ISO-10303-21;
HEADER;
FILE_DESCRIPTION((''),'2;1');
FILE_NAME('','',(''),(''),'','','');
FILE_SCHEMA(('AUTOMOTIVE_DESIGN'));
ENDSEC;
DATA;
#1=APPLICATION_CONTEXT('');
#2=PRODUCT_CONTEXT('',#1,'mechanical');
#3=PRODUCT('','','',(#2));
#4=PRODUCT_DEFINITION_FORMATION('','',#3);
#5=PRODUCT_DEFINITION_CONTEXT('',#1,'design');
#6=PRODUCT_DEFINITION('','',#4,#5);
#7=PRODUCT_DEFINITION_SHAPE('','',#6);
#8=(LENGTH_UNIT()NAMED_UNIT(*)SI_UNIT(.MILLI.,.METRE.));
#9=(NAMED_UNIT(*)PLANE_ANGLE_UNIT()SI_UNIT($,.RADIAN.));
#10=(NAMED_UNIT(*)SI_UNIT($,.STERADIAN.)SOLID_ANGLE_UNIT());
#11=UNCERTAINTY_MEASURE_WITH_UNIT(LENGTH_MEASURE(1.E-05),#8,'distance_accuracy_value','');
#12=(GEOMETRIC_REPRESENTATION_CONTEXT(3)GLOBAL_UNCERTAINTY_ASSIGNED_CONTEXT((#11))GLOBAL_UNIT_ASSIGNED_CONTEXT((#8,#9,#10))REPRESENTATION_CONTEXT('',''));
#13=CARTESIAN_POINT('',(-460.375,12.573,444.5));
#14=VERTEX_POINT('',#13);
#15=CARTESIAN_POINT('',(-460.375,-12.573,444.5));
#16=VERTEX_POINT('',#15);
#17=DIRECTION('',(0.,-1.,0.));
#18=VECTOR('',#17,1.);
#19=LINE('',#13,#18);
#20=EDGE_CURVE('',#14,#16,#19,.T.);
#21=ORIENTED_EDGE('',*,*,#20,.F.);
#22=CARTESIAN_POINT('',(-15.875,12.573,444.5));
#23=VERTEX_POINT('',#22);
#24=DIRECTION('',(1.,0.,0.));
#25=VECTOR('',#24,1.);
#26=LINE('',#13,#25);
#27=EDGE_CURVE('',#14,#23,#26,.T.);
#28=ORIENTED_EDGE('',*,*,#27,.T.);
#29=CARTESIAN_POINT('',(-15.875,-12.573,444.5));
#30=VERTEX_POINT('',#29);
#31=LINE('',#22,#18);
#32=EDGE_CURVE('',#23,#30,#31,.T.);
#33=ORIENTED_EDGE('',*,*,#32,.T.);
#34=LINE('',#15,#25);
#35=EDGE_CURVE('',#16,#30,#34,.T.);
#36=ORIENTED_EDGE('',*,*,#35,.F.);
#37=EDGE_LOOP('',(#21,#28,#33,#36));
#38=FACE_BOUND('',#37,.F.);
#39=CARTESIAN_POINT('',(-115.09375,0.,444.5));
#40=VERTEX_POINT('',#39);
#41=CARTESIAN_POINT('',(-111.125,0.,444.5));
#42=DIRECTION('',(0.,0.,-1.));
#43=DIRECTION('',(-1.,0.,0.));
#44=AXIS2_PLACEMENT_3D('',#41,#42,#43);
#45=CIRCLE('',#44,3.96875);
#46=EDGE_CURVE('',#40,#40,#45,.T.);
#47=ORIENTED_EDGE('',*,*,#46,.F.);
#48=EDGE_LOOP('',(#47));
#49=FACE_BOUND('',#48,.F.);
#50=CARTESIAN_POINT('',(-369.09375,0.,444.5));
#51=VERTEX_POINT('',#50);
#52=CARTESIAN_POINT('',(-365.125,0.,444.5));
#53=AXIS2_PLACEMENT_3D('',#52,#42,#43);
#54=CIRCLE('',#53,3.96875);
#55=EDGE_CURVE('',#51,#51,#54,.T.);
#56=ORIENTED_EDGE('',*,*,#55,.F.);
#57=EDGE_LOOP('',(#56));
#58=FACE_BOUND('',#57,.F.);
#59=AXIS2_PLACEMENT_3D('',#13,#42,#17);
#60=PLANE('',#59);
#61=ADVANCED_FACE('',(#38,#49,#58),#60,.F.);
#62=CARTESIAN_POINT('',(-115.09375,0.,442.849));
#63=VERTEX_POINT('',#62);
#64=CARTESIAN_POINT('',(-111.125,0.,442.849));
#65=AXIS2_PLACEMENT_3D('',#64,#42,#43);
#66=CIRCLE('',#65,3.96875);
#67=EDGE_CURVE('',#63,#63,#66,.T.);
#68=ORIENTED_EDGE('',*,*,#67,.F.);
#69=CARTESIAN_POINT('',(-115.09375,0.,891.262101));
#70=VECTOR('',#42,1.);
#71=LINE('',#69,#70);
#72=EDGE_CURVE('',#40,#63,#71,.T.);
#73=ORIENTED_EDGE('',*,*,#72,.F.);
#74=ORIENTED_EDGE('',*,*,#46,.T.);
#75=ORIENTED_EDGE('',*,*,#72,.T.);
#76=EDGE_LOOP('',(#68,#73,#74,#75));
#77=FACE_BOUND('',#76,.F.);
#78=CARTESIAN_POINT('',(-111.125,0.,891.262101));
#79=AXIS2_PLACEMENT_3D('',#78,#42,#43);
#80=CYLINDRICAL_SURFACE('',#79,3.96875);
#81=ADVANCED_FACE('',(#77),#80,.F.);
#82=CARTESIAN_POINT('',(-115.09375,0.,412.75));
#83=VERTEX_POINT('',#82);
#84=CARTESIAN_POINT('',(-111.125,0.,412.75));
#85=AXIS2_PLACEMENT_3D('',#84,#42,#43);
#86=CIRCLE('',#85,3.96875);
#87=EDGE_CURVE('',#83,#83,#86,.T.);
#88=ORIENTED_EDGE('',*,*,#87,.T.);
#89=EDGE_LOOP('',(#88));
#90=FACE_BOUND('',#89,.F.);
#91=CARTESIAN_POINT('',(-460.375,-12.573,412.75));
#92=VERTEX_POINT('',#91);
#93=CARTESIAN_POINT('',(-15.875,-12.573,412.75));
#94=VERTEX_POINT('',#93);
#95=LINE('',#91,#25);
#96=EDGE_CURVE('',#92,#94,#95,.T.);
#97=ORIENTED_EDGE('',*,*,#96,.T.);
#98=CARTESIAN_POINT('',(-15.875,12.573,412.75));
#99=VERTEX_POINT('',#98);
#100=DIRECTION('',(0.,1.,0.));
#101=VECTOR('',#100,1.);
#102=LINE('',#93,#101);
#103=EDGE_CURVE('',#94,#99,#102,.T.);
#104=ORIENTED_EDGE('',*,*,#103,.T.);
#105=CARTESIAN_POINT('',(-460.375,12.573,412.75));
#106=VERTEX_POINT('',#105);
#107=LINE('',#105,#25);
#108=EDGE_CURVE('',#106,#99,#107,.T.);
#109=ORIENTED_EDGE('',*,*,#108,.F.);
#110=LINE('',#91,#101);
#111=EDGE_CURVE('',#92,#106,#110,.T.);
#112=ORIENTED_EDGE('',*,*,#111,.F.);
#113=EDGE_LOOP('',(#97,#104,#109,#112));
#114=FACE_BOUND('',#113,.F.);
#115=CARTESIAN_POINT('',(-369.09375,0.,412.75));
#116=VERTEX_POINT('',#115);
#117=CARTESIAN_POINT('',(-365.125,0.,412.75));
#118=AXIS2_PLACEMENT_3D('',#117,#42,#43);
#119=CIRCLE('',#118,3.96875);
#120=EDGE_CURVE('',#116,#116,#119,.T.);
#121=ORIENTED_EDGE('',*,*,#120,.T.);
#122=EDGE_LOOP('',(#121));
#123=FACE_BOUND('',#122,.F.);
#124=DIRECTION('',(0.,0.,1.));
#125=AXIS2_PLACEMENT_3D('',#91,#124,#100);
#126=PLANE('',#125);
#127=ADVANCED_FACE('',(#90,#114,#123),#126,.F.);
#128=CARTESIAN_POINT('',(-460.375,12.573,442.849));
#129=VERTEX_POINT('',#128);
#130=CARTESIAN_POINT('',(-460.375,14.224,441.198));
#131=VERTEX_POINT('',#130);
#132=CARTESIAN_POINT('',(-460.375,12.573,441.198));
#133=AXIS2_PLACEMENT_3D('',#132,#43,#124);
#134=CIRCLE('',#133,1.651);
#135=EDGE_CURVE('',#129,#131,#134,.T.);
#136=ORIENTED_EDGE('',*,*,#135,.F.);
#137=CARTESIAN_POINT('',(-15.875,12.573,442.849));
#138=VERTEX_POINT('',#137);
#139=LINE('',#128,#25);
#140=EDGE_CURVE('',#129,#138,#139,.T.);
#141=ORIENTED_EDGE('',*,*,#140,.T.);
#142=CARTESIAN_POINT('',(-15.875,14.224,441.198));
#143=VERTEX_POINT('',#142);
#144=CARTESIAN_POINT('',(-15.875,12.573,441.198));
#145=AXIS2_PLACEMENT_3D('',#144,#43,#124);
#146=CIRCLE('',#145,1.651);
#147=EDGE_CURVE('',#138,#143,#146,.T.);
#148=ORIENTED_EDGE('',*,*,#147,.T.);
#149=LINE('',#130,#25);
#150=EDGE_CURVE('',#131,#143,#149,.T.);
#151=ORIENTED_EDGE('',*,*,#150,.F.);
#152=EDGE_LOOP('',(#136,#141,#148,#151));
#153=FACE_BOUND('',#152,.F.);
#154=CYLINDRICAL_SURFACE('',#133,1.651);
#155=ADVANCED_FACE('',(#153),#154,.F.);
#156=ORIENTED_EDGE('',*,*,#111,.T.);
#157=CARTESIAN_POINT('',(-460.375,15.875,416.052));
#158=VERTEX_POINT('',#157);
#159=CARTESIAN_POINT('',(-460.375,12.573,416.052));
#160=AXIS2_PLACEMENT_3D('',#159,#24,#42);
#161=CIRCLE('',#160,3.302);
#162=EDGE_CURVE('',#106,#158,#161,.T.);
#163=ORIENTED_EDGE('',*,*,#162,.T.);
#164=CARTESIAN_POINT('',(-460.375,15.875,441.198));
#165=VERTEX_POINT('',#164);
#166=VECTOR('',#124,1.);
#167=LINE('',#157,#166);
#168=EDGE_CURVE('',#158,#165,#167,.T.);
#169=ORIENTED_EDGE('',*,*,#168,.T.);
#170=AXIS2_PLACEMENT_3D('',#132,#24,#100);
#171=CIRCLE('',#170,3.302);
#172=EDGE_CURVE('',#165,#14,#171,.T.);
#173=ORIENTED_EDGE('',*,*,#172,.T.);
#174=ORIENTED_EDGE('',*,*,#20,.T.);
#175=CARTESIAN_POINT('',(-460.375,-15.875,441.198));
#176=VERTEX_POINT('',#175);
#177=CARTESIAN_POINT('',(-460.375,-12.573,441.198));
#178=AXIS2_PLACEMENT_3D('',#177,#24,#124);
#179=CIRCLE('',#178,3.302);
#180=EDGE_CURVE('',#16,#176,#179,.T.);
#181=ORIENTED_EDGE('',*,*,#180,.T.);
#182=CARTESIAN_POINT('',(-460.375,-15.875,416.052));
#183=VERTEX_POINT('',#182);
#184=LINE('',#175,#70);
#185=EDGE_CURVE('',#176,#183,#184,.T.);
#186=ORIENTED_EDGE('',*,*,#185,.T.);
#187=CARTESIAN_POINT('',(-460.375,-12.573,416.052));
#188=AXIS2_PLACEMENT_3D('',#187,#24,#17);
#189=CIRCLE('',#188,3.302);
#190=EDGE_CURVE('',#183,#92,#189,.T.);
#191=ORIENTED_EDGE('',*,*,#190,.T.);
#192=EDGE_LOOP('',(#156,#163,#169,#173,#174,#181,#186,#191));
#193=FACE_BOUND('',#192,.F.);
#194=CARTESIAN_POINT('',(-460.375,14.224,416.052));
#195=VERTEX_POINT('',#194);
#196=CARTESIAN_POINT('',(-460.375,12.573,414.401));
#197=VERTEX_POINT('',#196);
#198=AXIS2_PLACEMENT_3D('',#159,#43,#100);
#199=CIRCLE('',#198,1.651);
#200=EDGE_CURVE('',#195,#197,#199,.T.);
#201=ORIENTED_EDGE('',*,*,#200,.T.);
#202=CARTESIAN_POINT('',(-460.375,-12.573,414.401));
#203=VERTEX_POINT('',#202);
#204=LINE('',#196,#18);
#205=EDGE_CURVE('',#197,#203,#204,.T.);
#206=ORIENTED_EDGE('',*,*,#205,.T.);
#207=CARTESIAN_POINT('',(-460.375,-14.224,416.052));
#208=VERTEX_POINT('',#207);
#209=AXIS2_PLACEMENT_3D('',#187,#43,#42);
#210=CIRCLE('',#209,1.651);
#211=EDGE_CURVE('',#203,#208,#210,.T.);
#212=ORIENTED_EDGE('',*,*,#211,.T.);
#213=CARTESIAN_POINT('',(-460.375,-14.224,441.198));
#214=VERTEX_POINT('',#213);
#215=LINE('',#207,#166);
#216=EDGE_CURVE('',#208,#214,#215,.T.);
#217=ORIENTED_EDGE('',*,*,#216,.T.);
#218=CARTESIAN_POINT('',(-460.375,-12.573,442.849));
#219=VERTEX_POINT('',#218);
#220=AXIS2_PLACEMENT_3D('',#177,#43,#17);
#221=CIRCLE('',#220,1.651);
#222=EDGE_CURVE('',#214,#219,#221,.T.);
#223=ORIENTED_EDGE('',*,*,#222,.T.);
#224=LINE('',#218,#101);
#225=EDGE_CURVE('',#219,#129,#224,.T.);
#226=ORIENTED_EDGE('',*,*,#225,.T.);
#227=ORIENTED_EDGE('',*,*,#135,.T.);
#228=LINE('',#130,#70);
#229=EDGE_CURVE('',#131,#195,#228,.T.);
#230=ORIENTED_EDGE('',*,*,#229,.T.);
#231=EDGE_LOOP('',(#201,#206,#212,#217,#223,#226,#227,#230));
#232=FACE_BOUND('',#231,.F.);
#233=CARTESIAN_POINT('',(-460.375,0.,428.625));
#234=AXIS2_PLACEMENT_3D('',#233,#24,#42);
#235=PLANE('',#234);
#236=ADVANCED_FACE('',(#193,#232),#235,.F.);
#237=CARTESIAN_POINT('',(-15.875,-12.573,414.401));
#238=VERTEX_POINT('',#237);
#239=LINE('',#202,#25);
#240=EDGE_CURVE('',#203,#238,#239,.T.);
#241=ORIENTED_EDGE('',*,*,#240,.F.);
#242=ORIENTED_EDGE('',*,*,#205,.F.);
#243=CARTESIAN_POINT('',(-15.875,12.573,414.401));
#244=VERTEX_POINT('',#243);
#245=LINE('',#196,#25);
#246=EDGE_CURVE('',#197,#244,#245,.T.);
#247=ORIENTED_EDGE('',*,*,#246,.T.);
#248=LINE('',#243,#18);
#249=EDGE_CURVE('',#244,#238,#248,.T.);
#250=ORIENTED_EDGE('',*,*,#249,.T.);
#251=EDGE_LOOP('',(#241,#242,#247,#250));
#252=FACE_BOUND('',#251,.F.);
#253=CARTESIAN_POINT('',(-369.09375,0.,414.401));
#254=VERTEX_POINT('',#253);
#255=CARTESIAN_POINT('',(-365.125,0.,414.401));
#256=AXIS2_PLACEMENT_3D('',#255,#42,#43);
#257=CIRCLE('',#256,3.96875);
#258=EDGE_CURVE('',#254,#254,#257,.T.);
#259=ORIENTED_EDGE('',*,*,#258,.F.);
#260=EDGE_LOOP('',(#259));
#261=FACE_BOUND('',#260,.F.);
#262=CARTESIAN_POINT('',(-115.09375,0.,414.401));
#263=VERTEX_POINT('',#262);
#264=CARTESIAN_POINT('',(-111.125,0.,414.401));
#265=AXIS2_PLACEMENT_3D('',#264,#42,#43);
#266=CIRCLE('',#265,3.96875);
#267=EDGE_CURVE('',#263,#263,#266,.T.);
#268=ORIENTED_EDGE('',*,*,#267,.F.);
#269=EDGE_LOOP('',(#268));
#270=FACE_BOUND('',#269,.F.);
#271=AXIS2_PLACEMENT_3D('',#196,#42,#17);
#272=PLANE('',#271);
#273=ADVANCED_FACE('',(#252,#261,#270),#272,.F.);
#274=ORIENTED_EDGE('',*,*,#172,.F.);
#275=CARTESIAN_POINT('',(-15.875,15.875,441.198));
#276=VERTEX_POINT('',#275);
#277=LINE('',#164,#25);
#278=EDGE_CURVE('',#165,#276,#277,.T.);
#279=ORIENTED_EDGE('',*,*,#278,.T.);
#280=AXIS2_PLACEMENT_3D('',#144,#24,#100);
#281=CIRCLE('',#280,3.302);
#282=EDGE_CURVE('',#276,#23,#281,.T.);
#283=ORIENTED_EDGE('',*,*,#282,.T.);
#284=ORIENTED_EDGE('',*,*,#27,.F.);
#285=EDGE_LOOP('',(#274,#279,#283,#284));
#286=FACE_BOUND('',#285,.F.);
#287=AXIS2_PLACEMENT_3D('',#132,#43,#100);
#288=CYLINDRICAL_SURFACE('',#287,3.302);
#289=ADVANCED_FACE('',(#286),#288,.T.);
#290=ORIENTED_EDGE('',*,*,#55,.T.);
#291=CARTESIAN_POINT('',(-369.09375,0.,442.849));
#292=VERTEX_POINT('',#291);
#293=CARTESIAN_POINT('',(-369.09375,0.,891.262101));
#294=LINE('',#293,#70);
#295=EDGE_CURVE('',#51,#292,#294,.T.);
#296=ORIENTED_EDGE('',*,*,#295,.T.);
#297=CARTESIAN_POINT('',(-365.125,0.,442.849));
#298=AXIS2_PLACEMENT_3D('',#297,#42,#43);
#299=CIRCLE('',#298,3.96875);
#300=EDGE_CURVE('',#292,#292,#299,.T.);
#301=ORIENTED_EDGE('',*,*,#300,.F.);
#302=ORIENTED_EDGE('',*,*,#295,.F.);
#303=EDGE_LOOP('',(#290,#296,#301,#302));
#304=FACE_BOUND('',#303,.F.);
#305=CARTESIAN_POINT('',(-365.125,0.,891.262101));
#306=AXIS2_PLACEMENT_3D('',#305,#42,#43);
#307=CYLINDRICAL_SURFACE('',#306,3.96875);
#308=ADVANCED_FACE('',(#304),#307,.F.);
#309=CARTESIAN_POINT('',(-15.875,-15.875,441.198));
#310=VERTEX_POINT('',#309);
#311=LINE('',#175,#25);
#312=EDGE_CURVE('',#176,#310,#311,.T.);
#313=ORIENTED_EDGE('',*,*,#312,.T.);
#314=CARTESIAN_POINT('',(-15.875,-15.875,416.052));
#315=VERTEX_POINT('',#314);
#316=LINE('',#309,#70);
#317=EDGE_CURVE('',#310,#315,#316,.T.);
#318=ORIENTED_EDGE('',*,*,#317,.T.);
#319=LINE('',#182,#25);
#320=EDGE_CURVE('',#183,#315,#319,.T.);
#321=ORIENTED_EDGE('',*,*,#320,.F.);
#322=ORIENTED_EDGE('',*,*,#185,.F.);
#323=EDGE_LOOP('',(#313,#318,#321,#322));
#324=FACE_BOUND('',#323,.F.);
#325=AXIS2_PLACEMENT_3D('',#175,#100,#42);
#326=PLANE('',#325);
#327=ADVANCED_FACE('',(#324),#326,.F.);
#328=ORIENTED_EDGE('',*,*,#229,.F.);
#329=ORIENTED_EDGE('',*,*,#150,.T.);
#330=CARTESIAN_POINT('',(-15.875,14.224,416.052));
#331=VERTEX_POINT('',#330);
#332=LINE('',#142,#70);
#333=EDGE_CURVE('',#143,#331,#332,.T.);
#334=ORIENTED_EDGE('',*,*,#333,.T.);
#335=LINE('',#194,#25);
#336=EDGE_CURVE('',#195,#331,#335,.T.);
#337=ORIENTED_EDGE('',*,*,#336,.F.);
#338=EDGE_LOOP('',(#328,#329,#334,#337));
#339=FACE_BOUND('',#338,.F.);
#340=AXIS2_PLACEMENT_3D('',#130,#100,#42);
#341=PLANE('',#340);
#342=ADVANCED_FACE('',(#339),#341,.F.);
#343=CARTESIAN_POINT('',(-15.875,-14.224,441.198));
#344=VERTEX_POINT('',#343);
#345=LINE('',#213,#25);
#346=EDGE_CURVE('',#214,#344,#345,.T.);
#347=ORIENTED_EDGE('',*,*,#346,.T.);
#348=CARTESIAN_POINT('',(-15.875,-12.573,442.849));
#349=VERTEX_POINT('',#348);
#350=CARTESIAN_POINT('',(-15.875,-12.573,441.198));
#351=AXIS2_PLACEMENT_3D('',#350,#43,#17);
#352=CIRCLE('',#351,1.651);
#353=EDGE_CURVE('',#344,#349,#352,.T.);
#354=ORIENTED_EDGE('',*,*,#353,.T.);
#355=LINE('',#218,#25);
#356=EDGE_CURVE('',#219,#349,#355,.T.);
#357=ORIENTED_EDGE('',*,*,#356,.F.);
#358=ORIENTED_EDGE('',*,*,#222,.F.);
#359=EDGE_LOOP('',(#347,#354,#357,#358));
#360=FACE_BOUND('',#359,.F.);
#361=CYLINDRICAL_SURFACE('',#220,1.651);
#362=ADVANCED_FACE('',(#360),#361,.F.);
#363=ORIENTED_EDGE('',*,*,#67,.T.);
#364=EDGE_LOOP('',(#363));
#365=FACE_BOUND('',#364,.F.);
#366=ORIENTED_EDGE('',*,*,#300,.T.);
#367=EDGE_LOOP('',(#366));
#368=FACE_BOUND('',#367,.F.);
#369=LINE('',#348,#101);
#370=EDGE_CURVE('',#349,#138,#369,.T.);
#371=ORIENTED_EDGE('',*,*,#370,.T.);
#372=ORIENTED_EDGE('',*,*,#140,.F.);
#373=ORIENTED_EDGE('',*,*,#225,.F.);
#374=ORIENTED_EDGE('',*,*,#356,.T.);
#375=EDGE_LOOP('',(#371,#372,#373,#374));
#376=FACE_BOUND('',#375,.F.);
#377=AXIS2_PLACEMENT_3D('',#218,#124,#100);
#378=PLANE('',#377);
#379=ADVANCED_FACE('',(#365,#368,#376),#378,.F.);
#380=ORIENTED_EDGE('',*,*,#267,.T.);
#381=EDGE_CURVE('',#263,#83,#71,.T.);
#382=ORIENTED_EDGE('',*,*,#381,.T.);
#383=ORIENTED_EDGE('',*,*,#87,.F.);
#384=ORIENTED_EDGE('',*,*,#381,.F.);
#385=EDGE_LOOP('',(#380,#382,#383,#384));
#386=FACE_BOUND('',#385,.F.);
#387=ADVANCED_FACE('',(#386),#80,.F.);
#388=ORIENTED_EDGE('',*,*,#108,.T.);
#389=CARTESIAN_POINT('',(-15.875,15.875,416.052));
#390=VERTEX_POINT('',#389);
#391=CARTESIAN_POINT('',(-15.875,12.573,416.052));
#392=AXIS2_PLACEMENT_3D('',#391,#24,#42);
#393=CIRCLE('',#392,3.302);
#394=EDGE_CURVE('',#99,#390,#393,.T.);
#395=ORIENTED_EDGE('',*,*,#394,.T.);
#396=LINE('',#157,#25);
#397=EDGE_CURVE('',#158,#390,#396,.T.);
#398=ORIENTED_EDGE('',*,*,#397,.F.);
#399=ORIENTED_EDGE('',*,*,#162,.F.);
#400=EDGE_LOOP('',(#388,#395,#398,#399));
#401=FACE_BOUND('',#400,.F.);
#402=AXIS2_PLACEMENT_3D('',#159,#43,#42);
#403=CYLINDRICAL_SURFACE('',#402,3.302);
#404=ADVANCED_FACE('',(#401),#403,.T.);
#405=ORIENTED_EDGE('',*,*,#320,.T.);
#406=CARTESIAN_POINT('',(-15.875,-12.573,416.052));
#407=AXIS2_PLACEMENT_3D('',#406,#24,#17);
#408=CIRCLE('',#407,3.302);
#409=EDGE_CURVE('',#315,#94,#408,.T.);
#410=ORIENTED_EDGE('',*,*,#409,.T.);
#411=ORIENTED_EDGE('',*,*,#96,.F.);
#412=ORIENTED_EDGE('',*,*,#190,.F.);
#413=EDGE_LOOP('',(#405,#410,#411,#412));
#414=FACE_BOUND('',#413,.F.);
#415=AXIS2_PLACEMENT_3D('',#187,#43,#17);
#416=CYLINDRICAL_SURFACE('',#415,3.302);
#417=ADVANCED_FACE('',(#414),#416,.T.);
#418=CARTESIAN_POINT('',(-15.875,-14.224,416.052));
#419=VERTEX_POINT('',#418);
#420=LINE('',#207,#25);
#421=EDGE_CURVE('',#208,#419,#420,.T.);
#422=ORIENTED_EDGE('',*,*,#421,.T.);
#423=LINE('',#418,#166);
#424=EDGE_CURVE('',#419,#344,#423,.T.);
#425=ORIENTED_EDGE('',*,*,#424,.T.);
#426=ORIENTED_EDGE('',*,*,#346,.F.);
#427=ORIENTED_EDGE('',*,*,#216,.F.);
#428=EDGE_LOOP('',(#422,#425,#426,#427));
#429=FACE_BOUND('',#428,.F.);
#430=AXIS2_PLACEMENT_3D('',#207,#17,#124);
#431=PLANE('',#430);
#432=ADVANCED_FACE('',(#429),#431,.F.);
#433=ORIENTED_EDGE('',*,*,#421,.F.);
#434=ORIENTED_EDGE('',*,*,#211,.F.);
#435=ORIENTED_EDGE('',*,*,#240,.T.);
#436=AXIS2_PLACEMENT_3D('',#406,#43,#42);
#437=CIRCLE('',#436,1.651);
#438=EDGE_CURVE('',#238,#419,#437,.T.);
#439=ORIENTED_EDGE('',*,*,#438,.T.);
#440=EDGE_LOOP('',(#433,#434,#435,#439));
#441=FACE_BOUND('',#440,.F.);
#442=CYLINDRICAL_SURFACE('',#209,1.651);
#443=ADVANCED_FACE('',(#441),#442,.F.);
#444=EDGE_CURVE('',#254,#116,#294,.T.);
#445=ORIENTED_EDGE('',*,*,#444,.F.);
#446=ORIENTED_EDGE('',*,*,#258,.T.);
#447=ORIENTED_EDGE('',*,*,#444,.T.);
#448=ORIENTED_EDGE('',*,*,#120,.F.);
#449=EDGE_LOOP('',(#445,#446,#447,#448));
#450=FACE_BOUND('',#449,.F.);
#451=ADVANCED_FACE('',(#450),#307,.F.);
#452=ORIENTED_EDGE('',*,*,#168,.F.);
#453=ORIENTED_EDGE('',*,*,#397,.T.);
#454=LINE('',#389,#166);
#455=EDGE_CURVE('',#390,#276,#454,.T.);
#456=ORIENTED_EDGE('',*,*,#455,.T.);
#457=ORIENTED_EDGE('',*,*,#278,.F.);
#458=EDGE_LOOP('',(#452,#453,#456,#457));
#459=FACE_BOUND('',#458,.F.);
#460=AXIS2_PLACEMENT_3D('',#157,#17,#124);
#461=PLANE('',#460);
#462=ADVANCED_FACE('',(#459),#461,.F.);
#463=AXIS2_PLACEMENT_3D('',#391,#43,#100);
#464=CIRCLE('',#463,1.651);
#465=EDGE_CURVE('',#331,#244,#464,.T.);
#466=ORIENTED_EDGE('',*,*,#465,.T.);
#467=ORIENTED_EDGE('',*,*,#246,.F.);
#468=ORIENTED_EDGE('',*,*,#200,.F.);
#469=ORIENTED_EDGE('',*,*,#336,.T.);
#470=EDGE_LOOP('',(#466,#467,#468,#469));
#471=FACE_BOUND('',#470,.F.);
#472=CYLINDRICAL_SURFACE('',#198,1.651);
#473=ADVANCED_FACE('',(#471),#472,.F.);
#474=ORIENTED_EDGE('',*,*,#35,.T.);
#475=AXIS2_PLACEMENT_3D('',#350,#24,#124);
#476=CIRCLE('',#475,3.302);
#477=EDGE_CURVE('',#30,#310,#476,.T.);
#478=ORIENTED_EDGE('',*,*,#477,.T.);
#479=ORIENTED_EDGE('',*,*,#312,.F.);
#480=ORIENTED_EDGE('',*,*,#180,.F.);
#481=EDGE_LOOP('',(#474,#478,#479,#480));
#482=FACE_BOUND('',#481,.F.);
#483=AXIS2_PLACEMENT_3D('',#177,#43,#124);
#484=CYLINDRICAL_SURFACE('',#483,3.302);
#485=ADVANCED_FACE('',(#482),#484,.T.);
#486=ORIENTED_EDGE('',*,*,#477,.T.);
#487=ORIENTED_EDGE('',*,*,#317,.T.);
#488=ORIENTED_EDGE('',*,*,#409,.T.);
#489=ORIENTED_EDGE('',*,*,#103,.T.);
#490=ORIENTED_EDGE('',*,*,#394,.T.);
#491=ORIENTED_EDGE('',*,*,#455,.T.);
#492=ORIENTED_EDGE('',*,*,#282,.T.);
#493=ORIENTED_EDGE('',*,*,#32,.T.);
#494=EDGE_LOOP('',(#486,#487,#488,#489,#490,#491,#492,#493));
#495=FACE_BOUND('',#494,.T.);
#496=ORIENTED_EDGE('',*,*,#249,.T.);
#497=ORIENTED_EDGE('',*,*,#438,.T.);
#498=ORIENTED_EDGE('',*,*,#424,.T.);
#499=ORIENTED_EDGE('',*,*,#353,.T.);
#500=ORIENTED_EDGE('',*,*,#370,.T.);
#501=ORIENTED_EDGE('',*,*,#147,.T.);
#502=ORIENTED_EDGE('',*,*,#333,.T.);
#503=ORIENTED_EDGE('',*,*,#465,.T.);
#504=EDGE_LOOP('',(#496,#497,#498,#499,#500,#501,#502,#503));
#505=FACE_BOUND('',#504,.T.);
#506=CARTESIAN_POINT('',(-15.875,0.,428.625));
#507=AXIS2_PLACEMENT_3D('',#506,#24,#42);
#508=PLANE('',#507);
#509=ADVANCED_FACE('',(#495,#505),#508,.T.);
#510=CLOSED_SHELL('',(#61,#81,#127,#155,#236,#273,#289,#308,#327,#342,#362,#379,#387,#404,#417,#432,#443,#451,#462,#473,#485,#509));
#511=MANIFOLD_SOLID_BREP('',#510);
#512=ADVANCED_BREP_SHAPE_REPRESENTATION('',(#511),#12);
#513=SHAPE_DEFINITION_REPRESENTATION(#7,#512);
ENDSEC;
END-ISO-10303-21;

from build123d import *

# Parameters (mm, degrees)
F2_DEPTH = 444.5
F3_ANGLE = 90
F5_D     = 7.9375


# Not quite as in the source:
# - a variable given as a bare number and used for a length is read in inches; the dataset says mm whatever the document's units were


with BuildPart() as f2:
    # F0 (on Top) → F2 (new body)
    with BuildSketch(Plane.XY):
        with BuildLine():
            Line((-12.573, -15.875), (12.573, -15.875))
            ThreePointArc((12.573, -15.875), (14.9078665915, -14.9078665915), (15.875, -12.573))
            Line((15.875, -12.573), (15.875, 12.573))
            ThreePointArc((15.875, 12.573), (14.9078665915, 14.9078665915), (12.573, 15.875))
            Line((12.573, 15.875), (-12.573, 15.875))
            ThreePointArc((-12.573, 15.875), (-14.9078665915, 14.9078665915), (-15.875, 12.573))
            Line((-15.875, 12.573), (-15.875, -12.573))
            ThreePointArc((-15.875, -12.573), (-14.9078665915, -14.9078665915), (-12.573, -15.875))
        make_face()
        with BuildLine():
            Line((-12.573, 14.224), (12.573, 14.224))
            ThreePointArc((12.573, 14.224), (13.7404332957, 13.7404332957), (14.224, 12.573))
            Line((14.224, 12.573), (14.224, -12.573))
            ThreePointArc((14.224, -12.573), (13.7404332957, -13.7404332957), (12.573, -14.224))
            Line((12.573, -14.224), (-12.573, -14.224))
            ThreePointArc((-12.573, -14.224), (-13.7404332957, -13.7404332957), (-14.224, -12.573))
            Line((-14.224, -12.573), (-14.224, 12.573))
            ThreePointArc((-14.224, 12.573), (-13.7404332957, 13.7404332957), (-12.573, 14.224))
        make_face(mode=Mode.SUBTRACT)
    extrude(amount=F2_DEPTH)


with BuildPart() as f2_1:
    # F3: moved
    add(f2.part.rotate(Axis((-15.875, 0, 444.5), (0, 1, 0)), F3_ANGLE))

    # F5 (through all)
    with Locations(Plane.XY.offset(444.5)):
        with Locations((-365.125, 0), (-111.125, 0)):
            Hole(F5_D / 2)


solid = f2_1.part
